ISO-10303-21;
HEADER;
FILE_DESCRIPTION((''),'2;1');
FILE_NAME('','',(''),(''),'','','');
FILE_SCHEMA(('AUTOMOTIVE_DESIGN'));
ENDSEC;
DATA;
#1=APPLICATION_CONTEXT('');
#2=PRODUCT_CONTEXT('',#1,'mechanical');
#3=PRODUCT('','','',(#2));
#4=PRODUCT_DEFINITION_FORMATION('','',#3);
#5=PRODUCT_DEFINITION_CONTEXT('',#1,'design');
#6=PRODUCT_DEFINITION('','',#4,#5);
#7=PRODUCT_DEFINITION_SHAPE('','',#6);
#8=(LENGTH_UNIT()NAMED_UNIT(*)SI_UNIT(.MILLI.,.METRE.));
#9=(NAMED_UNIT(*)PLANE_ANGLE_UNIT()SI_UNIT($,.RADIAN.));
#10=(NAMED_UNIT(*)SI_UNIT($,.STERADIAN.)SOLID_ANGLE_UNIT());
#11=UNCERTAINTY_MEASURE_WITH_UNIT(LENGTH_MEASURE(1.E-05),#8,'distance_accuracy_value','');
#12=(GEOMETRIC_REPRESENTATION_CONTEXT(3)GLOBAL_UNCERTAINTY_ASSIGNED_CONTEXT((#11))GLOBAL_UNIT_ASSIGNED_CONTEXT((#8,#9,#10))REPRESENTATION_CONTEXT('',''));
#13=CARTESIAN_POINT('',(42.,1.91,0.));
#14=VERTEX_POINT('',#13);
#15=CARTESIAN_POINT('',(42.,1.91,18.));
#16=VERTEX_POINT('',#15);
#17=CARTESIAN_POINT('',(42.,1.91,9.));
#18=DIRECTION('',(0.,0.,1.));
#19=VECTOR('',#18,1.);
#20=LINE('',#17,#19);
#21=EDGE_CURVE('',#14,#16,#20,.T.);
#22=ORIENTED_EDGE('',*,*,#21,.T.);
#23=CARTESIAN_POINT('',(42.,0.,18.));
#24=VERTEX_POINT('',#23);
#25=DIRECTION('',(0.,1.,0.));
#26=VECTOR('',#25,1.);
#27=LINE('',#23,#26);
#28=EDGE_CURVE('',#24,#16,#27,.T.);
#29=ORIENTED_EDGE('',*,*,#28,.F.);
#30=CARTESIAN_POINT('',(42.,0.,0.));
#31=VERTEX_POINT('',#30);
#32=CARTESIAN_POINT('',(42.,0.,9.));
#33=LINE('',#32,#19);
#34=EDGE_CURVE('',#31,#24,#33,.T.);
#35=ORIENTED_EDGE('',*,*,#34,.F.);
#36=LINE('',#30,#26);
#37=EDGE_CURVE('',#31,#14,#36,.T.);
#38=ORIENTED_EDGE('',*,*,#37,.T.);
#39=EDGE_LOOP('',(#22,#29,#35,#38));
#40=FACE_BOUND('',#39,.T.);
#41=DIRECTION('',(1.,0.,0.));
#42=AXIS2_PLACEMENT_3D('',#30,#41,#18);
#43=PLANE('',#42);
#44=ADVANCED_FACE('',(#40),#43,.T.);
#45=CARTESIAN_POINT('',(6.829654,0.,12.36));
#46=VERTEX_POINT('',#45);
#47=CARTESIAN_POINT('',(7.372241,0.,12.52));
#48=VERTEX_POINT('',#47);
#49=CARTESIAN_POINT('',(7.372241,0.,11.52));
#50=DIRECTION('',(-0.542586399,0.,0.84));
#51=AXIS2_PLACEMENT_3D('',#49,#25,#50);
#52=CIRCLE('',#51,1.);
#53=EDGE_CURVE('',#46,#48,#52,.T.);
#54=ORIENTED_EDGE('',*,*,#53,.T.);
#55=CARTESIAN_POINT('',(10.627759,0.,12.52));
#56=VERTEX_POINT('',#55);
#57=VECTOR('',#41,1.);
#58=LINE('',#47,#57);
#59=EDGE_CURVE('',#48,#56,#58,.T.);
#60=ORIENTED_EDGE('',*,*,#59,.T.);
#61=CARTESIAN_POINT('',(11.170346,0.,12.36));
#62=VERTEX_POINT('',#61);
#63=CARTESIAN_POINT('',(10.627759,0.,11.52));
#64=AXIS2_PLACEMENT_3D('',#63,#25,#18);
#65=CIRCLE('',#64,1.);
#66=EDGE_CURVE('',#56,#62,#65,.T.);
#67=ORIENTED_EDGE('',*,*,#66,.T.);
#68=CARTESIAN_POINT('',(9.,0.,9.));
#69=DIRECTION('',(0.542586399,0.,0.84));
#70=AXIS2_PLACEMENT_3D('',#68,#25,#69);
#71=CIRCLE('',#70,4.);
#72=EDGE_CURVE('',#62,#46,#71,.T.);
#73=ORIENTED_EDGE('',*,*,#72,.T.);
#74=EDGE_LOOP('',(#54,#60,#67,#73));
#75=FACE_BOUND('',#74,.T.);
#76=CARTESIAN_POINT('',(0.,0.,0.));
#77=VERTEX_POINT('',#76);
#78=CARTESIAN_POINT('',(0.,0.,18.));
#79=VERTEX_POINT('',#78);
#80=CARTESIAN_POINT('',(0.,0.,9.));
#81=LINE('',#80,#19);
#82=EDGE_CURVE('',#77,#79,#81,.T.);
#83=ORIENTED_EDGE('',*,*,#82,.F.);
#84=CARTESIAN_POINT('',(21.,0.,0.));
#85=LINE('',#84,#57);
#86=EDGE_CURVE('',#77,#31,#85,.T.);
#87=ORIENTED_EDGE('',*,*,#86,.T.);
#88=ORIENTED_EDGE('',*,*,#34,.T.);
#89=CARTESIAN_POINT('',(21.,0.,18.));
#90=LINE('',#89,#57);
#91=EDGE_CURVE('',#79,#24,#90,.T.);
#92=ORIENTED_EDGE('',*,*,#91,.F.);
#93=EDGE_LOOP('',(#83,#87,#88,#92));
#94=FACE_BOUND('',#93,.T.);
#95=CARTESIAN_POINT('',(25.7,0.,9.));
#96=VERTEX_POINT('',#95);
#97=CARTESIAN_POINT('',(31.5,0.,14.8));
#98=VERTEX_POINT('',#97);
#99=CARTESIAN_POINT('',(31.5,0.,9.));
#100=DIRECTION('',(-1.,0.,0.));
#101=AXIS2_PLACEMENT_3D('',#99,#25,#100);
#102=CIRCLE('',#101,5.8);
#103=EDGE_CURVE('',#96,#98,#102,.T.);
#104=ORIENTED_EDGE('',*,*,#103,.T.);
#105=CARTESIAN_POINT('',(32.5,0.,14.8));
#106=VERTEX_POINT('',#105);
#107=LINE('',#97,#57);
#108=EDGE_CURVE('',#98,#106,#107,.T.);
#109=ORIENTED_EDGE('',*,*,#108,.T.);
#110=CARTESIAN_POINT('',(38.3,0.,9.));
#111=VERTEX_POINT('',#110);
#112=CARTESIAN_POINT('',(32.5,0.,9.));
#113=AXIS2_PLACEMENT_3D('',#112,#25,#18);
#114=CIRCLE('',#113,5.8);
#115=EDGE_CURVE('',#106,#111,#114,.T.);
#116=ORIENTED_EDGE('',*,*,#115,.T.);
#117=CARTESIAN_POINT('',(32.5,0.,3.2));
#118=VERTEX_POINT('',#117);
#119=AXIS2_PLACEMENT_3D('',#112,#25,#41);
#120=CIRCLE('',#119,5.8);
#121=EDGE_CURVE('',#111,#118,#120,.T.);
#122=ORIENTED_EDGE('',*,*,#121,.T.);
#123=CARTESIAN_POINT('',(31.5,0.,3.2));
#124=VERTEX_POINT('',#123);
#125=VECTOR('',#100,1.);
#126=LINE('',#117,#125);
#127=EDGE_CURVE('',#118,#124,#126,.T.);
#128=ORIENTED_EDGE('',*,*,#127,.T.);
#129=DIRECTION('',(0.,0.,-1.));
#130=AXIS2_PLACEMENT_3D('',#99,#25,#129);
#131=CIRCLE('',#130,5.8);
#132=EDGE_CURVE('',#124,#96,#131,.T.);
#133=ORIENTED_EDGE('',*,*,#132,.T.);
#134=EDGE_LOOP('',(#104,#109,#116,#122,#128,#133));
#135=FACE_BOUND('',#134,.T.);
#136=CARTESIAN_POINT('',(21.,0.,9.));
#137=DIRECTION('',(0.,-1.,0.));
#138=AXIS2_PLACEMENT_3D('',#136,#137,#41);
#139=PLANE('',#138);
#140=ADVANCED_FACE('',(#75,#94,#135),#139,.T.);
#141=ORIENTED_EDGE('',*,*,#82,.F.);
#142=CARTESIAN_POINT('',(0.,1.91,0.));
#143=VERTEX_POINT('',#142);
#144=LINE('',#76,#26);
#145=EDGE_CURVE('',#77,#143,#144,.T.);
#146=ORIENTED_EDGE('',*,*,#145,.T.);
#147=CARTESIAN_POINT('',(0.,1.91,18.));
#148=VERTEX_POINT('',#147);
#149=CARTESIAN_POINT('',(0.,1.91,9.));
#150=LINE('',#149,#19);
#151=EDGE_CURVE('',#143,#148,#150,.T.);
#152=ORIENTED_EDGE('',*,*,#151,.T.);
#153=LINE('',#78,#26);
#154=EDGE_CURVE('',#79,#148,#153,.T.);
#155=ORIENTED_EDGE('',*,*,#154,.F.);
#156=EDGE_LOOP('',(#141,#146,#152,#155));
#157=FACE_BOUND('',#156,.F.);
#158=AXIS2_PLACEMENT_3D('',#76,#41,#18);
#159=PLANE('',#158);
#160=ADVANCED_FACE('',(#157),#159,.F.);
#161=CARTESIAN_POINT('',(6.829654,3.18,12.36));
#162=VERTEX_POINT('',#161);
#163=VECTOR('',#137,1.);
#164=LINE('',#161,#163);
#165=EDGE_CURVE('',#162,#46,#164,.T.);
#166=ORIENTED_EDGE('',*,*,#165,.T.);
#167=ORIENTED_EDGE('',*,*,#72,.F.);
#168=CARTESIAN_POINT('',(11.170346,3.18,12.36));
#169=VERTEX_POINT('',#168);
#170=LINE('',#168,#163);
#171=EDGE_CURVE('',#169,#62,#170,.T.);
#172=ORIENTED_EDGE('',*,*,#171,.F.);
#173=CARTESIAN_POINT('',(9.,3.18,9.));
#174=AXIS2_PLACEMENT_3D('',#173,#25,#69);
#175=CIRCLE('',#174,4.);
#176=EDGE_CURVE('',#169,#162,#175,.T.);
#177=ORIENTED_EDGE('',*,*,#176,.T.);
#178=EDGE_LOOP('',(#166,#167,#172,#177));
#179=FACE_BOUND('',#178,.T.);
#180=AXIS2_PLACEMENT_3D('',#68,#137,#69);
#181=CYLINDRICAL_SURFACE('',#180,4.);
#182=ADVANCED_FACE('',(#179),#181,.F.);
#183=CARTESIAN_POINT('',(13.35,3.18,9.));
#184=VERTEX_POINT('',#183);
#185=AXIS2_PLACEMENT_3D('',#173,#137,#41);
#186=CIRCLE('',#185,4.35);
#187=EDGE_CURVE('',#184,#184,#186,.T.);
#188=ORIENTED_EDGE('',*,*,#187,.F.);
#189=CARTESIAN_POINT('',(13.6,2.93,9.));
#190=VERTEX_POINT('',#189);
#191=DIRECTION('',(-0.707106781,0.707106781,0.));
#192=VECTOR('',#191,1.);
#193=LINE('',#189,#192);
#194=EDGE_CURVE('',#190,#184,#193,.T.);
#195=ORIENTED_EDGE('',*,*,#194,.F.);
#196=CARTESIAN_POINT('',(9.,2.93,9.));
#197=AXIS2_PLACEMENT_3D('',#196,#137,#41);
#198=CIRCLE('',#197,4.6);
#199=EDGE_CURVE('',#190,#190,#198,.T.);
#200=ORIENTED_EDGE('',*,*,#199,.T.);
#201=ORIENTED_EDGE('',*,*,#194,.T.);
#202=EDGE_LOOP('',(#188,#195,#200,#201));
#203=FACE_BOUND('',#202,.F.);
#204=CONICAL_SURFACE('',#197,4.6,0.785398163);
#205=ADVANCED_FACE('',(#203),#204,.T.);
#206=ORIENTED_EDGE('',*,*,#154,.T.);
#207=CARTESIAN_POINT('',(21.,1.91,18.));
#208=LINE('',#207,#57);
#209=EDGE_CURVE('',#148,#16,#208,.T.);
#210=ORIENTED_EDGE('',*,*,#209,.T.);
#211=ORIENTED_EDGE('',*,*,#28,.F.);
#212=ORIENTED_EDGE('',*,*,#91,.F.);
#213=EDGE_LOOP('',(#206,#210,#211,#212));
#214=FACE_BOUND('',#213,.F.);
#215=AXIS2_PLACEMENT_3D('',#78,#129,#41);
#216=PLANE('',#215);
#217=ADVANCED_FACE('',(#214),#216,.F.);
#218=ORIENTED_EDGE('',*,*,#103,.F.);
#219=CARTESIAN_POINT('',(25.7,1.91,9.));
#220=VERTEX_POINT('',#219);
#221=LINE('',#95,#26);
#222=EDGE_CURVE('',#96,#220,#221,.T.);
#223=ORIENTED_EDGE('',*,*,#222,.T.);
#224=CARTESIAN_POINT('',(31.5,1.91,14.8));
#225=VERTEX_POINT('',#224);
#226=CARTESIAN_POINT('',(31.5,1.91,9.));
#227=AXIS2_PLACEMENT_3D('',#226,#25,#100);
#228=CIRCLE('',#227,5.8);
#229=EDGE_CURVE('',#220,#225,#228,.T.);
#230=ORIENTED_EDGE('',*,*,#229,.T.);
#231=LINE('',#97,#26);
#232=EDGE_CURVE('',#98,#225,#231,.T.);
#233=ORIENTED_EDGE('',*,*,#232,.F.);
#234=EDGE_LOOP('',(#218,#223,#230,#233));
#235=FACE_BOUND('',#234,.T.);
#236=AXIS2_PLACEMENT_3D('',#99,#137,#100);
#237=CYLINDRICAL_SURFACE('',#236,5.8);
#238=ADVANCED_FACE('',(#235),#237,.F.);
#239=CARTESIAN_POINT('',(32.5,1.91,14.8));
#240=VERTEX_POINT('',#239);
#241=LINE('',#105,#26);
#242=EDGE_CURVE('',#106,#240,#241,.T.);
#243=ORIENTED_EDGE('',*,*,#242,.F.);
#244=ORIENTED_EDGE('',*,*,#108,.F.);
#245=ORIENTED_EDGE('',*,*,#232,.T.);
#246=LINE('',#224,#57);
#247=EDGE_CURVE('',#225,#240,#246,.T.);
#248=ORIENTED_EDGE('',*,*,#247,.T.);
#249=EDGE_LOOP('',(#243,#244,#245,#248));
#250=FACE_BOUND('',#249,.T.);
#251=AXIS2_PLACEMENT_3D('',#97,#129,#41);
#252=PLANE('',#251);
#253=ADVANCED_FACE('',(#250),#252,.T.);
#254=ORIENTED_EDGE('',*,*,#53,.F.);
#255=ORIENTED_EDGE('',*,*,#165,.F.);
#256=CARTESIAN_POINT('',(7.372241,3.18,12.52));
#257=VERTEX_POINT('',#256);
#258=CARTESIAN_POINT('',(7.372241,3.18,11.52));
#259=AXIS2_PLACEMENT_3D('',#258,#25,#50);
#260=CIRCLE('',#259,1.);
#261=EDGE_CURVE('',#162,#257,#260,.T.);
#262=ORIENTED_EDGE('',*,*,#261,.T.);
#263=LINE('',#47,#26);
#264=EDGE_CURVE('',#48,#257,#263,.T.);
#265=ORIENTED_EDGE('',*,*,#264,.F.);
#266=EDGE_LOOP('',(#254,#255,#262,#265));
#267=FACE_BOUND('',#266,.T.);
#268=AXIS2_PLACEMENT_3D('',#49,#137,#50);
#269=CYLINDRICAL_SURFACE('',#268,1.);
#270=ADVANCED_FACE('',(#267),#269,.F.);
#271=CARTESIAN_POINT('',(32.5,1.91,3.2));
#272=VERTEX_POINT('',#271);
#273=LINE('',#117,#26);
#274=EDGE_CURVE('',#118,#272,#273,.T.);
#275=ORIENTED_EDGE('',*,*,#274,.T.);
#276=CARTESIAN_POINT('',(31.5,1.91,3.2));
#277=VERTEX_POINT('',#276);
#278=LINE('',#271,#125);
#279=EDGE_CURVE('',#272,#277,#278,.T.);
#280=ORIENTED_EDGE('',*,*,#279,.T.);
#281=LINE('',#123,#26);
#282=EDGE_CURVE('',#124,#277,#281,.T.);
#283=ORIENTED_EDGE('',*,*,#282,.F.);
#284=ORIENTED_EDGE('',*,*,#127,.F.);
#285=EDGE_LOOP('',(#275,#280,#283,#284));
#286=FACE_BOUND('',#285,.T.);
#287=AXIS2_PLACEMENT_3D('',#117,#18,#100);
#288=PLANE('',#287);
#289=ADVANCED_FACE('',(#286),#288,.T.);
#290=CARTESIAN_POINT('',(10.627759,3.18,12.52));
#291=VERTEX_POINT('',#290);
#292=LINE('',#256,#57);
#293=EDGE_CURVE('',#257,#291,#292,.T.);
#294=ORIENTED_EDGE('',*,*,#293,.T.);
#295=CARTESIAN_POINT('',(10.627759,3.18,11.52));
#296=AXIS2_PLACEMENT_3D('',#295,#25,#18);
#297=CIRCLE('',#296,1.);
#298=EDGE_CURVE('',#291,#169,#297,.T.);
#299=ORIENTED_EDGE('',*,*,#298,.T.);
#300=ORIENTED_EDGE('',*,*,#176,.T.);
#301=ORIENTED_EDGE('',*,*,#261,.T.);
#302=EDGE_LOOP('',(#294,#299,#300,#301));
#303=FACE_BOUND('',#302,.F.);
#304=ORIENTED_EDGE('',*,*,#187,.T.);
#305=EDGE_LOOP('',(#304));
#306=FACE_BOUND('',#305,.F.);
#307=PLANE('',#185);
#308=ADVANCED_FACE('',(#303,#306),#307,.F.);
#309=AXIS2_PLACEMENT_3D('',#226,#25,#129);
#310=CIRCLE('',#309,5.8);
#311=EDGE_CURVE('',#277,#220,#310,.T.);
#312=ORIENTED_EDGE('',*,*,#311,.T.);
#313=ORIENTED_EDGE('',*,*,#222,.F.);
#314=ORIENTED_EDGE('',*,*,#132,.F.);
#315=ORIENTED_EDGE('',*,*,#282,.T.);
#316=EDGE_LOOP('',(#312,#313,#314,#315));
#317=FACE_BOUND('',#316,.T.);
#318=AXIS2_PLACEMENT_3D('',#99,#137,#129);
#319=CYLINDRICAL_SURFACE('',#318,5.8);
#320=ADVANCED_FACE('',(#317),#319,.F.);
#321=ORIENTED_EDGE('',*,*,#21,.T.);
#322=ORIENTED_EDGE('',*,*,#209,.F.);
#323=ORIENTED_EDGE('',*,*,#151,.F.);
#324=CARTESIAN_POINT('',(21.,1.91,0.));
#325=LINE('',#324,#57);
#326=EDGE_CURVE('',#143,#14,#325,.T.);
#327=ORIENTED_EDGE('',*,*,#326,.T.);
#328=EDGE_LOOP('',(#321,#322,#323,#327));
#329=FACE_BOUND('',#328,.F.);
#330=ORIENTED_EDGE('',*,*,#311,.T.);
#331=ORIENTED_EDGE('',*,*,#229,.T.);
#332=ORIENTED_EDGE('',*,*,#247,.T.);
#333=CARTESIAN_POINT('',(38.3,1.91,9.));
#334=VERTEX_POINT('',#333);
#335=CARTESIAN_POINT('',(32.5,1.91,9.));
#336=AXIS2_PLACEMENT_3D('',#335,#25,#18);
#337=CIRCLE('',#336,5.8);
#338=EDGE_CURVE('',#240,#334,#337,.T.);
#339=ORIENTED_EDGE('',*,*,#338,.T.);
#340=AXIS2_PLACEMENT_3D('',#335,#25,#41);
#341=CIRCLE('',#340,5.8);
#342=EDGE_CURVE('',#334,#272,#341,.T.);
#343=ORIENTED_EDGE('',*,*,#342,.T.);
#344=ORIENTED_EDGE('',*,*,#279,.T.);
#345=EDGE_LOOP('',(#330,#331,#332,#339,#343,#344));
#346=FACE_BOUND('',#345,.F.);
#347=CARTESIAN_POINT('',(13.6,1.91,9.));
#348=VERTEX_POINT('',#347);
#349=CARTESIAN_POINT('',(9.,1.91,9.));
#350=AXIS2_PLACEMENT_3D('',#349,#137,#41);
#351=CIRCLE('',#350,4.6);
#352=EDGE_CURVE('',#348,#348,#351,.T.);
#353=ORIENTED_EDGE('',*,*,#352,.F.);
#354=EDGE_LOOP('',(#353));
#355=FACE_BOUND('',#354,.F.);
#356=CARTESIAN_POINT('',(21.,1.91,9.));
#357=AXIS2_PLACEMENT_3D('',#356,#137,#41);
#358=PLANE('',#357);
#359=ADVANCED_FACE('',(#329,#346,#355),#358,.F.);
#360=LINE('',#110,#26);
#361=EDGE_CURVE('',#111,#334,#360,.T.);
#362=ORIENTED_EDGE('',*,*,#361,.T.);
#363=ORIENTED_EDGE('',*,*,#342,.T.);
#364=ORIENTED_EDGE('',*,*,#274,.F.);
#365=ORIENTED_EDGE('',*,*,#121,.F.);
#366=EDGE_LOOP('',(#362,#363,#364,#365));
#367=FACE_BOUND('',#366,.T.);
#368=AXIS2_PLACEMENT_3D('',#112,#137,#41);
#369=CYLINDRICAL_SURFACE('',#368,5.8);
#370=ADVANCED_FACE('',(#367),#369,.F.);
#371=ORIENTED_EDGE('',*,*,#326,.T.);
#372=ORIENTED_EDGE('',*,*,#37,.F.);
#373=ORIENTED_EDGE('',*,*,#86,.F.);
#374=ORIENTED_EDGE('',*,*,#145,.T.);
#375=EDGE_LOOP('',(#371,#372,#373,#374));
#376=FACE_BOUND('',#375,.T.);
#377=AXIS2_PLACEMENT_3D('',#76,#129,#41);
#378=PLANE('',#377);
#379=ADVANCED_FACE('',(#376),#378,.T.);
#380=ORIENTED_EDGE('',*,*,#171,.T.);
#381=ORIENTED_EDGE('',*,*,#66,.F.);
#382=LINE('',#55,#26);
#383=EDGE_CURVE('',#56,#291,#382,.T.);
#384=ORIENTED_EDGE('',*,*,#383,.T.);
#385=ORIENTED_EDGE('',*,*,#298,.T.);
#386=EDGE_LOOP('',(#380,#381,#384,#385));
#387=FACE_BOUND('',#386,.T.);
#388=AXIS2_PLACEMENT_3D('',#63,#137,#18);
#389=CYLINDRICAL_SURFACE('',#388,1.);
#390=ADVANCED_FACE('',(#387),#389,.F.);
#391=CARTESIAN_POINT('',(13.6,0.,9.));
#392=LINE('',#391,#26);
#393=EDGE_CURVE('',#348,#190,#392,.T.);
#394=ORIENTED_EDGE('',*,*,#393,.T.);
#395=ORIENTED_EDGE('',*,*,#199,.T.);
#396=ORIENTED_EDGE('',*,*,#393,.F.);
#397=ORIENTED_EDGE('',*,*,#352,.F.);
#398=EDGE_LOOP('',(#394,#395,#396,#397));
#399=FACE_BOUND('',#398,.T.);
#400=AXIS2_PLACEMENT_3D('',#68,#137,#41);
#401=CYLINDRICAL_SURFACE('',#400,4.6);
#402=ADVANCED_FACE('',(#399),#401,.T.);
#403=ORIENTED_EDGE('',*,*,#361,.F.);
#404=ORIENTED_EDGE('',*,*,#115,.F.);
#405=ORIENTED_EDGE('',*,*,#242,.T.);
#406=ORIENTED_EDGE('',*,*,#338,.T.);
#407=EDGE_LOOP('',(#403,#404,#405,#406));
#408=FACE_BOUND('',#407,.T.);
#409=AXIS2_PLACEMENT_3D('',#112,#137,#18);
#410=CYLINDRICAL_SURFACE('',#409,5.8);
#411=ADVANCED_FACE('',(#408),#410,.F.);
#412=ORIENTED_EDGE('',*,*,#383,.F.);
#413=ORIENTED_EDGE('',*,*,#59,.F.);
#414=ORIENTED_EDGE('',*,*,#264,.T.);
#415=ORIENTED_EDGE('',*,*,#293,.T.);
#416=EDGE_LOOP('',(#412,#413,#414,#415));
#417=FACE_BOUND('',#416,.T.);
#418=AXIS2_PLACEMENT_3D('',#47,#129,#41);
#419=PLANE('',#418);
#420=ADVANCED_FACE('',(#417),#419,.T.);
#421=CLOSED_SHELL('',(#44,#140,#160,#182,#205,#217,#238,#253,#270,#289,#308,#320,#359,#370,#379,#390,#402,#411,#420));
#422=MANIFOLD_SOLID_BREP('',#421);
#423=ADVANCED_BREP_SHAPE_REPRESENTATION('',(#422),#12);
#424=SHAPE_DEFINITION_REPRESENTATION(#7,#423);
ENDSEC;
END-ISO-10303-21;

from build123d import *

# Parameters (mm, degrees)
F0_W     = 42
F0_H     = 18
F2_DEPTH = 1.91
F1_R     = 4.6
F3_DEPTH = 3.18
F4_SIZE  = 0.25


# Not quite as in the source:
# - a feature names something its author has since deleted; it is built from what else it names


with BuildPart() as f2:
    # F0 (on Front) → F2 (new body)
    with BuildSketch(Plane.XZ):
        with Locations((21, 9)):
            Rectangle(F0_W, F0_H)
        with BuildLine():
            ThreePointArc((11.1703455946, 12.36), (9, 5), (6.8296544054, 12.36))
            ThreePointArc((6.8296544054, 12.36), (7.0893980916, 12.4791663047), (7.372240804, 12.52))
            Line((7.372240804, 12.52), (10.627759196, 12.52))
            ThreePointArc((10.627759196, 12.52), (10.9106019084, 12.4791663047), (11.1703455946, 12.36))
        make_face(mode=Mode.SUBTRACT)
        with BuildLine():
            Line((32.5, 3.2), (31.5, 3.2))
            ThreePointArc((31.5, 3.2), (27.3987806691, 4.8987806691), (25.7, 9))
            ThreePointArc((25.7, 9), (27.3987806691, 13.1012193309), (31.5, 14.8))
            Line((31.5, 14.8), (32.5, 14.8))
            ThreePointArc((32.5, 14.8), (36.6012193309, 13.1012193309), (38.3, 9))
            ThreePointArc((38.3, 9), (36.6012193309, 4.8987806691), (32.5, 3.2))
        make_face(mode=Mode.SUBTRACT)
    extrude(amount=-F2_DEPTH)

    # F1 (on face) → F3 (join)
    with BuildSketch(Plane.XZ):
        with Locations((9, 9)):
            Circle(F1_R)
        with BuildLine():
            ThreePointArc((10.627759196, 12.52), (10.9106019084, 12.4791663047), (11.1703455946, 12.36))
            ThreePointArc((11.1703455946, 12.36), (9, 5), (6.8296544054, 12.36))
            ThreePointArc((6.8296544054, 12.36), (7.0893980916, 12.4791663047), (7.372240804, 12.52))
            Line((7.372240804, 12.52), (10.627759196, 12.52))
        make_face(mode=Mode.SUBTRACT)
    extrude(amount=-F3_DEPTH)

    # F4
    f4_edges = [f2.edges().sort_by_distance(p)[0] for p in [
        (4.4, 3.18, 9),
    ]]
    chamfer(f4_edges, length=F4_SIZE)


solid = f2.part
